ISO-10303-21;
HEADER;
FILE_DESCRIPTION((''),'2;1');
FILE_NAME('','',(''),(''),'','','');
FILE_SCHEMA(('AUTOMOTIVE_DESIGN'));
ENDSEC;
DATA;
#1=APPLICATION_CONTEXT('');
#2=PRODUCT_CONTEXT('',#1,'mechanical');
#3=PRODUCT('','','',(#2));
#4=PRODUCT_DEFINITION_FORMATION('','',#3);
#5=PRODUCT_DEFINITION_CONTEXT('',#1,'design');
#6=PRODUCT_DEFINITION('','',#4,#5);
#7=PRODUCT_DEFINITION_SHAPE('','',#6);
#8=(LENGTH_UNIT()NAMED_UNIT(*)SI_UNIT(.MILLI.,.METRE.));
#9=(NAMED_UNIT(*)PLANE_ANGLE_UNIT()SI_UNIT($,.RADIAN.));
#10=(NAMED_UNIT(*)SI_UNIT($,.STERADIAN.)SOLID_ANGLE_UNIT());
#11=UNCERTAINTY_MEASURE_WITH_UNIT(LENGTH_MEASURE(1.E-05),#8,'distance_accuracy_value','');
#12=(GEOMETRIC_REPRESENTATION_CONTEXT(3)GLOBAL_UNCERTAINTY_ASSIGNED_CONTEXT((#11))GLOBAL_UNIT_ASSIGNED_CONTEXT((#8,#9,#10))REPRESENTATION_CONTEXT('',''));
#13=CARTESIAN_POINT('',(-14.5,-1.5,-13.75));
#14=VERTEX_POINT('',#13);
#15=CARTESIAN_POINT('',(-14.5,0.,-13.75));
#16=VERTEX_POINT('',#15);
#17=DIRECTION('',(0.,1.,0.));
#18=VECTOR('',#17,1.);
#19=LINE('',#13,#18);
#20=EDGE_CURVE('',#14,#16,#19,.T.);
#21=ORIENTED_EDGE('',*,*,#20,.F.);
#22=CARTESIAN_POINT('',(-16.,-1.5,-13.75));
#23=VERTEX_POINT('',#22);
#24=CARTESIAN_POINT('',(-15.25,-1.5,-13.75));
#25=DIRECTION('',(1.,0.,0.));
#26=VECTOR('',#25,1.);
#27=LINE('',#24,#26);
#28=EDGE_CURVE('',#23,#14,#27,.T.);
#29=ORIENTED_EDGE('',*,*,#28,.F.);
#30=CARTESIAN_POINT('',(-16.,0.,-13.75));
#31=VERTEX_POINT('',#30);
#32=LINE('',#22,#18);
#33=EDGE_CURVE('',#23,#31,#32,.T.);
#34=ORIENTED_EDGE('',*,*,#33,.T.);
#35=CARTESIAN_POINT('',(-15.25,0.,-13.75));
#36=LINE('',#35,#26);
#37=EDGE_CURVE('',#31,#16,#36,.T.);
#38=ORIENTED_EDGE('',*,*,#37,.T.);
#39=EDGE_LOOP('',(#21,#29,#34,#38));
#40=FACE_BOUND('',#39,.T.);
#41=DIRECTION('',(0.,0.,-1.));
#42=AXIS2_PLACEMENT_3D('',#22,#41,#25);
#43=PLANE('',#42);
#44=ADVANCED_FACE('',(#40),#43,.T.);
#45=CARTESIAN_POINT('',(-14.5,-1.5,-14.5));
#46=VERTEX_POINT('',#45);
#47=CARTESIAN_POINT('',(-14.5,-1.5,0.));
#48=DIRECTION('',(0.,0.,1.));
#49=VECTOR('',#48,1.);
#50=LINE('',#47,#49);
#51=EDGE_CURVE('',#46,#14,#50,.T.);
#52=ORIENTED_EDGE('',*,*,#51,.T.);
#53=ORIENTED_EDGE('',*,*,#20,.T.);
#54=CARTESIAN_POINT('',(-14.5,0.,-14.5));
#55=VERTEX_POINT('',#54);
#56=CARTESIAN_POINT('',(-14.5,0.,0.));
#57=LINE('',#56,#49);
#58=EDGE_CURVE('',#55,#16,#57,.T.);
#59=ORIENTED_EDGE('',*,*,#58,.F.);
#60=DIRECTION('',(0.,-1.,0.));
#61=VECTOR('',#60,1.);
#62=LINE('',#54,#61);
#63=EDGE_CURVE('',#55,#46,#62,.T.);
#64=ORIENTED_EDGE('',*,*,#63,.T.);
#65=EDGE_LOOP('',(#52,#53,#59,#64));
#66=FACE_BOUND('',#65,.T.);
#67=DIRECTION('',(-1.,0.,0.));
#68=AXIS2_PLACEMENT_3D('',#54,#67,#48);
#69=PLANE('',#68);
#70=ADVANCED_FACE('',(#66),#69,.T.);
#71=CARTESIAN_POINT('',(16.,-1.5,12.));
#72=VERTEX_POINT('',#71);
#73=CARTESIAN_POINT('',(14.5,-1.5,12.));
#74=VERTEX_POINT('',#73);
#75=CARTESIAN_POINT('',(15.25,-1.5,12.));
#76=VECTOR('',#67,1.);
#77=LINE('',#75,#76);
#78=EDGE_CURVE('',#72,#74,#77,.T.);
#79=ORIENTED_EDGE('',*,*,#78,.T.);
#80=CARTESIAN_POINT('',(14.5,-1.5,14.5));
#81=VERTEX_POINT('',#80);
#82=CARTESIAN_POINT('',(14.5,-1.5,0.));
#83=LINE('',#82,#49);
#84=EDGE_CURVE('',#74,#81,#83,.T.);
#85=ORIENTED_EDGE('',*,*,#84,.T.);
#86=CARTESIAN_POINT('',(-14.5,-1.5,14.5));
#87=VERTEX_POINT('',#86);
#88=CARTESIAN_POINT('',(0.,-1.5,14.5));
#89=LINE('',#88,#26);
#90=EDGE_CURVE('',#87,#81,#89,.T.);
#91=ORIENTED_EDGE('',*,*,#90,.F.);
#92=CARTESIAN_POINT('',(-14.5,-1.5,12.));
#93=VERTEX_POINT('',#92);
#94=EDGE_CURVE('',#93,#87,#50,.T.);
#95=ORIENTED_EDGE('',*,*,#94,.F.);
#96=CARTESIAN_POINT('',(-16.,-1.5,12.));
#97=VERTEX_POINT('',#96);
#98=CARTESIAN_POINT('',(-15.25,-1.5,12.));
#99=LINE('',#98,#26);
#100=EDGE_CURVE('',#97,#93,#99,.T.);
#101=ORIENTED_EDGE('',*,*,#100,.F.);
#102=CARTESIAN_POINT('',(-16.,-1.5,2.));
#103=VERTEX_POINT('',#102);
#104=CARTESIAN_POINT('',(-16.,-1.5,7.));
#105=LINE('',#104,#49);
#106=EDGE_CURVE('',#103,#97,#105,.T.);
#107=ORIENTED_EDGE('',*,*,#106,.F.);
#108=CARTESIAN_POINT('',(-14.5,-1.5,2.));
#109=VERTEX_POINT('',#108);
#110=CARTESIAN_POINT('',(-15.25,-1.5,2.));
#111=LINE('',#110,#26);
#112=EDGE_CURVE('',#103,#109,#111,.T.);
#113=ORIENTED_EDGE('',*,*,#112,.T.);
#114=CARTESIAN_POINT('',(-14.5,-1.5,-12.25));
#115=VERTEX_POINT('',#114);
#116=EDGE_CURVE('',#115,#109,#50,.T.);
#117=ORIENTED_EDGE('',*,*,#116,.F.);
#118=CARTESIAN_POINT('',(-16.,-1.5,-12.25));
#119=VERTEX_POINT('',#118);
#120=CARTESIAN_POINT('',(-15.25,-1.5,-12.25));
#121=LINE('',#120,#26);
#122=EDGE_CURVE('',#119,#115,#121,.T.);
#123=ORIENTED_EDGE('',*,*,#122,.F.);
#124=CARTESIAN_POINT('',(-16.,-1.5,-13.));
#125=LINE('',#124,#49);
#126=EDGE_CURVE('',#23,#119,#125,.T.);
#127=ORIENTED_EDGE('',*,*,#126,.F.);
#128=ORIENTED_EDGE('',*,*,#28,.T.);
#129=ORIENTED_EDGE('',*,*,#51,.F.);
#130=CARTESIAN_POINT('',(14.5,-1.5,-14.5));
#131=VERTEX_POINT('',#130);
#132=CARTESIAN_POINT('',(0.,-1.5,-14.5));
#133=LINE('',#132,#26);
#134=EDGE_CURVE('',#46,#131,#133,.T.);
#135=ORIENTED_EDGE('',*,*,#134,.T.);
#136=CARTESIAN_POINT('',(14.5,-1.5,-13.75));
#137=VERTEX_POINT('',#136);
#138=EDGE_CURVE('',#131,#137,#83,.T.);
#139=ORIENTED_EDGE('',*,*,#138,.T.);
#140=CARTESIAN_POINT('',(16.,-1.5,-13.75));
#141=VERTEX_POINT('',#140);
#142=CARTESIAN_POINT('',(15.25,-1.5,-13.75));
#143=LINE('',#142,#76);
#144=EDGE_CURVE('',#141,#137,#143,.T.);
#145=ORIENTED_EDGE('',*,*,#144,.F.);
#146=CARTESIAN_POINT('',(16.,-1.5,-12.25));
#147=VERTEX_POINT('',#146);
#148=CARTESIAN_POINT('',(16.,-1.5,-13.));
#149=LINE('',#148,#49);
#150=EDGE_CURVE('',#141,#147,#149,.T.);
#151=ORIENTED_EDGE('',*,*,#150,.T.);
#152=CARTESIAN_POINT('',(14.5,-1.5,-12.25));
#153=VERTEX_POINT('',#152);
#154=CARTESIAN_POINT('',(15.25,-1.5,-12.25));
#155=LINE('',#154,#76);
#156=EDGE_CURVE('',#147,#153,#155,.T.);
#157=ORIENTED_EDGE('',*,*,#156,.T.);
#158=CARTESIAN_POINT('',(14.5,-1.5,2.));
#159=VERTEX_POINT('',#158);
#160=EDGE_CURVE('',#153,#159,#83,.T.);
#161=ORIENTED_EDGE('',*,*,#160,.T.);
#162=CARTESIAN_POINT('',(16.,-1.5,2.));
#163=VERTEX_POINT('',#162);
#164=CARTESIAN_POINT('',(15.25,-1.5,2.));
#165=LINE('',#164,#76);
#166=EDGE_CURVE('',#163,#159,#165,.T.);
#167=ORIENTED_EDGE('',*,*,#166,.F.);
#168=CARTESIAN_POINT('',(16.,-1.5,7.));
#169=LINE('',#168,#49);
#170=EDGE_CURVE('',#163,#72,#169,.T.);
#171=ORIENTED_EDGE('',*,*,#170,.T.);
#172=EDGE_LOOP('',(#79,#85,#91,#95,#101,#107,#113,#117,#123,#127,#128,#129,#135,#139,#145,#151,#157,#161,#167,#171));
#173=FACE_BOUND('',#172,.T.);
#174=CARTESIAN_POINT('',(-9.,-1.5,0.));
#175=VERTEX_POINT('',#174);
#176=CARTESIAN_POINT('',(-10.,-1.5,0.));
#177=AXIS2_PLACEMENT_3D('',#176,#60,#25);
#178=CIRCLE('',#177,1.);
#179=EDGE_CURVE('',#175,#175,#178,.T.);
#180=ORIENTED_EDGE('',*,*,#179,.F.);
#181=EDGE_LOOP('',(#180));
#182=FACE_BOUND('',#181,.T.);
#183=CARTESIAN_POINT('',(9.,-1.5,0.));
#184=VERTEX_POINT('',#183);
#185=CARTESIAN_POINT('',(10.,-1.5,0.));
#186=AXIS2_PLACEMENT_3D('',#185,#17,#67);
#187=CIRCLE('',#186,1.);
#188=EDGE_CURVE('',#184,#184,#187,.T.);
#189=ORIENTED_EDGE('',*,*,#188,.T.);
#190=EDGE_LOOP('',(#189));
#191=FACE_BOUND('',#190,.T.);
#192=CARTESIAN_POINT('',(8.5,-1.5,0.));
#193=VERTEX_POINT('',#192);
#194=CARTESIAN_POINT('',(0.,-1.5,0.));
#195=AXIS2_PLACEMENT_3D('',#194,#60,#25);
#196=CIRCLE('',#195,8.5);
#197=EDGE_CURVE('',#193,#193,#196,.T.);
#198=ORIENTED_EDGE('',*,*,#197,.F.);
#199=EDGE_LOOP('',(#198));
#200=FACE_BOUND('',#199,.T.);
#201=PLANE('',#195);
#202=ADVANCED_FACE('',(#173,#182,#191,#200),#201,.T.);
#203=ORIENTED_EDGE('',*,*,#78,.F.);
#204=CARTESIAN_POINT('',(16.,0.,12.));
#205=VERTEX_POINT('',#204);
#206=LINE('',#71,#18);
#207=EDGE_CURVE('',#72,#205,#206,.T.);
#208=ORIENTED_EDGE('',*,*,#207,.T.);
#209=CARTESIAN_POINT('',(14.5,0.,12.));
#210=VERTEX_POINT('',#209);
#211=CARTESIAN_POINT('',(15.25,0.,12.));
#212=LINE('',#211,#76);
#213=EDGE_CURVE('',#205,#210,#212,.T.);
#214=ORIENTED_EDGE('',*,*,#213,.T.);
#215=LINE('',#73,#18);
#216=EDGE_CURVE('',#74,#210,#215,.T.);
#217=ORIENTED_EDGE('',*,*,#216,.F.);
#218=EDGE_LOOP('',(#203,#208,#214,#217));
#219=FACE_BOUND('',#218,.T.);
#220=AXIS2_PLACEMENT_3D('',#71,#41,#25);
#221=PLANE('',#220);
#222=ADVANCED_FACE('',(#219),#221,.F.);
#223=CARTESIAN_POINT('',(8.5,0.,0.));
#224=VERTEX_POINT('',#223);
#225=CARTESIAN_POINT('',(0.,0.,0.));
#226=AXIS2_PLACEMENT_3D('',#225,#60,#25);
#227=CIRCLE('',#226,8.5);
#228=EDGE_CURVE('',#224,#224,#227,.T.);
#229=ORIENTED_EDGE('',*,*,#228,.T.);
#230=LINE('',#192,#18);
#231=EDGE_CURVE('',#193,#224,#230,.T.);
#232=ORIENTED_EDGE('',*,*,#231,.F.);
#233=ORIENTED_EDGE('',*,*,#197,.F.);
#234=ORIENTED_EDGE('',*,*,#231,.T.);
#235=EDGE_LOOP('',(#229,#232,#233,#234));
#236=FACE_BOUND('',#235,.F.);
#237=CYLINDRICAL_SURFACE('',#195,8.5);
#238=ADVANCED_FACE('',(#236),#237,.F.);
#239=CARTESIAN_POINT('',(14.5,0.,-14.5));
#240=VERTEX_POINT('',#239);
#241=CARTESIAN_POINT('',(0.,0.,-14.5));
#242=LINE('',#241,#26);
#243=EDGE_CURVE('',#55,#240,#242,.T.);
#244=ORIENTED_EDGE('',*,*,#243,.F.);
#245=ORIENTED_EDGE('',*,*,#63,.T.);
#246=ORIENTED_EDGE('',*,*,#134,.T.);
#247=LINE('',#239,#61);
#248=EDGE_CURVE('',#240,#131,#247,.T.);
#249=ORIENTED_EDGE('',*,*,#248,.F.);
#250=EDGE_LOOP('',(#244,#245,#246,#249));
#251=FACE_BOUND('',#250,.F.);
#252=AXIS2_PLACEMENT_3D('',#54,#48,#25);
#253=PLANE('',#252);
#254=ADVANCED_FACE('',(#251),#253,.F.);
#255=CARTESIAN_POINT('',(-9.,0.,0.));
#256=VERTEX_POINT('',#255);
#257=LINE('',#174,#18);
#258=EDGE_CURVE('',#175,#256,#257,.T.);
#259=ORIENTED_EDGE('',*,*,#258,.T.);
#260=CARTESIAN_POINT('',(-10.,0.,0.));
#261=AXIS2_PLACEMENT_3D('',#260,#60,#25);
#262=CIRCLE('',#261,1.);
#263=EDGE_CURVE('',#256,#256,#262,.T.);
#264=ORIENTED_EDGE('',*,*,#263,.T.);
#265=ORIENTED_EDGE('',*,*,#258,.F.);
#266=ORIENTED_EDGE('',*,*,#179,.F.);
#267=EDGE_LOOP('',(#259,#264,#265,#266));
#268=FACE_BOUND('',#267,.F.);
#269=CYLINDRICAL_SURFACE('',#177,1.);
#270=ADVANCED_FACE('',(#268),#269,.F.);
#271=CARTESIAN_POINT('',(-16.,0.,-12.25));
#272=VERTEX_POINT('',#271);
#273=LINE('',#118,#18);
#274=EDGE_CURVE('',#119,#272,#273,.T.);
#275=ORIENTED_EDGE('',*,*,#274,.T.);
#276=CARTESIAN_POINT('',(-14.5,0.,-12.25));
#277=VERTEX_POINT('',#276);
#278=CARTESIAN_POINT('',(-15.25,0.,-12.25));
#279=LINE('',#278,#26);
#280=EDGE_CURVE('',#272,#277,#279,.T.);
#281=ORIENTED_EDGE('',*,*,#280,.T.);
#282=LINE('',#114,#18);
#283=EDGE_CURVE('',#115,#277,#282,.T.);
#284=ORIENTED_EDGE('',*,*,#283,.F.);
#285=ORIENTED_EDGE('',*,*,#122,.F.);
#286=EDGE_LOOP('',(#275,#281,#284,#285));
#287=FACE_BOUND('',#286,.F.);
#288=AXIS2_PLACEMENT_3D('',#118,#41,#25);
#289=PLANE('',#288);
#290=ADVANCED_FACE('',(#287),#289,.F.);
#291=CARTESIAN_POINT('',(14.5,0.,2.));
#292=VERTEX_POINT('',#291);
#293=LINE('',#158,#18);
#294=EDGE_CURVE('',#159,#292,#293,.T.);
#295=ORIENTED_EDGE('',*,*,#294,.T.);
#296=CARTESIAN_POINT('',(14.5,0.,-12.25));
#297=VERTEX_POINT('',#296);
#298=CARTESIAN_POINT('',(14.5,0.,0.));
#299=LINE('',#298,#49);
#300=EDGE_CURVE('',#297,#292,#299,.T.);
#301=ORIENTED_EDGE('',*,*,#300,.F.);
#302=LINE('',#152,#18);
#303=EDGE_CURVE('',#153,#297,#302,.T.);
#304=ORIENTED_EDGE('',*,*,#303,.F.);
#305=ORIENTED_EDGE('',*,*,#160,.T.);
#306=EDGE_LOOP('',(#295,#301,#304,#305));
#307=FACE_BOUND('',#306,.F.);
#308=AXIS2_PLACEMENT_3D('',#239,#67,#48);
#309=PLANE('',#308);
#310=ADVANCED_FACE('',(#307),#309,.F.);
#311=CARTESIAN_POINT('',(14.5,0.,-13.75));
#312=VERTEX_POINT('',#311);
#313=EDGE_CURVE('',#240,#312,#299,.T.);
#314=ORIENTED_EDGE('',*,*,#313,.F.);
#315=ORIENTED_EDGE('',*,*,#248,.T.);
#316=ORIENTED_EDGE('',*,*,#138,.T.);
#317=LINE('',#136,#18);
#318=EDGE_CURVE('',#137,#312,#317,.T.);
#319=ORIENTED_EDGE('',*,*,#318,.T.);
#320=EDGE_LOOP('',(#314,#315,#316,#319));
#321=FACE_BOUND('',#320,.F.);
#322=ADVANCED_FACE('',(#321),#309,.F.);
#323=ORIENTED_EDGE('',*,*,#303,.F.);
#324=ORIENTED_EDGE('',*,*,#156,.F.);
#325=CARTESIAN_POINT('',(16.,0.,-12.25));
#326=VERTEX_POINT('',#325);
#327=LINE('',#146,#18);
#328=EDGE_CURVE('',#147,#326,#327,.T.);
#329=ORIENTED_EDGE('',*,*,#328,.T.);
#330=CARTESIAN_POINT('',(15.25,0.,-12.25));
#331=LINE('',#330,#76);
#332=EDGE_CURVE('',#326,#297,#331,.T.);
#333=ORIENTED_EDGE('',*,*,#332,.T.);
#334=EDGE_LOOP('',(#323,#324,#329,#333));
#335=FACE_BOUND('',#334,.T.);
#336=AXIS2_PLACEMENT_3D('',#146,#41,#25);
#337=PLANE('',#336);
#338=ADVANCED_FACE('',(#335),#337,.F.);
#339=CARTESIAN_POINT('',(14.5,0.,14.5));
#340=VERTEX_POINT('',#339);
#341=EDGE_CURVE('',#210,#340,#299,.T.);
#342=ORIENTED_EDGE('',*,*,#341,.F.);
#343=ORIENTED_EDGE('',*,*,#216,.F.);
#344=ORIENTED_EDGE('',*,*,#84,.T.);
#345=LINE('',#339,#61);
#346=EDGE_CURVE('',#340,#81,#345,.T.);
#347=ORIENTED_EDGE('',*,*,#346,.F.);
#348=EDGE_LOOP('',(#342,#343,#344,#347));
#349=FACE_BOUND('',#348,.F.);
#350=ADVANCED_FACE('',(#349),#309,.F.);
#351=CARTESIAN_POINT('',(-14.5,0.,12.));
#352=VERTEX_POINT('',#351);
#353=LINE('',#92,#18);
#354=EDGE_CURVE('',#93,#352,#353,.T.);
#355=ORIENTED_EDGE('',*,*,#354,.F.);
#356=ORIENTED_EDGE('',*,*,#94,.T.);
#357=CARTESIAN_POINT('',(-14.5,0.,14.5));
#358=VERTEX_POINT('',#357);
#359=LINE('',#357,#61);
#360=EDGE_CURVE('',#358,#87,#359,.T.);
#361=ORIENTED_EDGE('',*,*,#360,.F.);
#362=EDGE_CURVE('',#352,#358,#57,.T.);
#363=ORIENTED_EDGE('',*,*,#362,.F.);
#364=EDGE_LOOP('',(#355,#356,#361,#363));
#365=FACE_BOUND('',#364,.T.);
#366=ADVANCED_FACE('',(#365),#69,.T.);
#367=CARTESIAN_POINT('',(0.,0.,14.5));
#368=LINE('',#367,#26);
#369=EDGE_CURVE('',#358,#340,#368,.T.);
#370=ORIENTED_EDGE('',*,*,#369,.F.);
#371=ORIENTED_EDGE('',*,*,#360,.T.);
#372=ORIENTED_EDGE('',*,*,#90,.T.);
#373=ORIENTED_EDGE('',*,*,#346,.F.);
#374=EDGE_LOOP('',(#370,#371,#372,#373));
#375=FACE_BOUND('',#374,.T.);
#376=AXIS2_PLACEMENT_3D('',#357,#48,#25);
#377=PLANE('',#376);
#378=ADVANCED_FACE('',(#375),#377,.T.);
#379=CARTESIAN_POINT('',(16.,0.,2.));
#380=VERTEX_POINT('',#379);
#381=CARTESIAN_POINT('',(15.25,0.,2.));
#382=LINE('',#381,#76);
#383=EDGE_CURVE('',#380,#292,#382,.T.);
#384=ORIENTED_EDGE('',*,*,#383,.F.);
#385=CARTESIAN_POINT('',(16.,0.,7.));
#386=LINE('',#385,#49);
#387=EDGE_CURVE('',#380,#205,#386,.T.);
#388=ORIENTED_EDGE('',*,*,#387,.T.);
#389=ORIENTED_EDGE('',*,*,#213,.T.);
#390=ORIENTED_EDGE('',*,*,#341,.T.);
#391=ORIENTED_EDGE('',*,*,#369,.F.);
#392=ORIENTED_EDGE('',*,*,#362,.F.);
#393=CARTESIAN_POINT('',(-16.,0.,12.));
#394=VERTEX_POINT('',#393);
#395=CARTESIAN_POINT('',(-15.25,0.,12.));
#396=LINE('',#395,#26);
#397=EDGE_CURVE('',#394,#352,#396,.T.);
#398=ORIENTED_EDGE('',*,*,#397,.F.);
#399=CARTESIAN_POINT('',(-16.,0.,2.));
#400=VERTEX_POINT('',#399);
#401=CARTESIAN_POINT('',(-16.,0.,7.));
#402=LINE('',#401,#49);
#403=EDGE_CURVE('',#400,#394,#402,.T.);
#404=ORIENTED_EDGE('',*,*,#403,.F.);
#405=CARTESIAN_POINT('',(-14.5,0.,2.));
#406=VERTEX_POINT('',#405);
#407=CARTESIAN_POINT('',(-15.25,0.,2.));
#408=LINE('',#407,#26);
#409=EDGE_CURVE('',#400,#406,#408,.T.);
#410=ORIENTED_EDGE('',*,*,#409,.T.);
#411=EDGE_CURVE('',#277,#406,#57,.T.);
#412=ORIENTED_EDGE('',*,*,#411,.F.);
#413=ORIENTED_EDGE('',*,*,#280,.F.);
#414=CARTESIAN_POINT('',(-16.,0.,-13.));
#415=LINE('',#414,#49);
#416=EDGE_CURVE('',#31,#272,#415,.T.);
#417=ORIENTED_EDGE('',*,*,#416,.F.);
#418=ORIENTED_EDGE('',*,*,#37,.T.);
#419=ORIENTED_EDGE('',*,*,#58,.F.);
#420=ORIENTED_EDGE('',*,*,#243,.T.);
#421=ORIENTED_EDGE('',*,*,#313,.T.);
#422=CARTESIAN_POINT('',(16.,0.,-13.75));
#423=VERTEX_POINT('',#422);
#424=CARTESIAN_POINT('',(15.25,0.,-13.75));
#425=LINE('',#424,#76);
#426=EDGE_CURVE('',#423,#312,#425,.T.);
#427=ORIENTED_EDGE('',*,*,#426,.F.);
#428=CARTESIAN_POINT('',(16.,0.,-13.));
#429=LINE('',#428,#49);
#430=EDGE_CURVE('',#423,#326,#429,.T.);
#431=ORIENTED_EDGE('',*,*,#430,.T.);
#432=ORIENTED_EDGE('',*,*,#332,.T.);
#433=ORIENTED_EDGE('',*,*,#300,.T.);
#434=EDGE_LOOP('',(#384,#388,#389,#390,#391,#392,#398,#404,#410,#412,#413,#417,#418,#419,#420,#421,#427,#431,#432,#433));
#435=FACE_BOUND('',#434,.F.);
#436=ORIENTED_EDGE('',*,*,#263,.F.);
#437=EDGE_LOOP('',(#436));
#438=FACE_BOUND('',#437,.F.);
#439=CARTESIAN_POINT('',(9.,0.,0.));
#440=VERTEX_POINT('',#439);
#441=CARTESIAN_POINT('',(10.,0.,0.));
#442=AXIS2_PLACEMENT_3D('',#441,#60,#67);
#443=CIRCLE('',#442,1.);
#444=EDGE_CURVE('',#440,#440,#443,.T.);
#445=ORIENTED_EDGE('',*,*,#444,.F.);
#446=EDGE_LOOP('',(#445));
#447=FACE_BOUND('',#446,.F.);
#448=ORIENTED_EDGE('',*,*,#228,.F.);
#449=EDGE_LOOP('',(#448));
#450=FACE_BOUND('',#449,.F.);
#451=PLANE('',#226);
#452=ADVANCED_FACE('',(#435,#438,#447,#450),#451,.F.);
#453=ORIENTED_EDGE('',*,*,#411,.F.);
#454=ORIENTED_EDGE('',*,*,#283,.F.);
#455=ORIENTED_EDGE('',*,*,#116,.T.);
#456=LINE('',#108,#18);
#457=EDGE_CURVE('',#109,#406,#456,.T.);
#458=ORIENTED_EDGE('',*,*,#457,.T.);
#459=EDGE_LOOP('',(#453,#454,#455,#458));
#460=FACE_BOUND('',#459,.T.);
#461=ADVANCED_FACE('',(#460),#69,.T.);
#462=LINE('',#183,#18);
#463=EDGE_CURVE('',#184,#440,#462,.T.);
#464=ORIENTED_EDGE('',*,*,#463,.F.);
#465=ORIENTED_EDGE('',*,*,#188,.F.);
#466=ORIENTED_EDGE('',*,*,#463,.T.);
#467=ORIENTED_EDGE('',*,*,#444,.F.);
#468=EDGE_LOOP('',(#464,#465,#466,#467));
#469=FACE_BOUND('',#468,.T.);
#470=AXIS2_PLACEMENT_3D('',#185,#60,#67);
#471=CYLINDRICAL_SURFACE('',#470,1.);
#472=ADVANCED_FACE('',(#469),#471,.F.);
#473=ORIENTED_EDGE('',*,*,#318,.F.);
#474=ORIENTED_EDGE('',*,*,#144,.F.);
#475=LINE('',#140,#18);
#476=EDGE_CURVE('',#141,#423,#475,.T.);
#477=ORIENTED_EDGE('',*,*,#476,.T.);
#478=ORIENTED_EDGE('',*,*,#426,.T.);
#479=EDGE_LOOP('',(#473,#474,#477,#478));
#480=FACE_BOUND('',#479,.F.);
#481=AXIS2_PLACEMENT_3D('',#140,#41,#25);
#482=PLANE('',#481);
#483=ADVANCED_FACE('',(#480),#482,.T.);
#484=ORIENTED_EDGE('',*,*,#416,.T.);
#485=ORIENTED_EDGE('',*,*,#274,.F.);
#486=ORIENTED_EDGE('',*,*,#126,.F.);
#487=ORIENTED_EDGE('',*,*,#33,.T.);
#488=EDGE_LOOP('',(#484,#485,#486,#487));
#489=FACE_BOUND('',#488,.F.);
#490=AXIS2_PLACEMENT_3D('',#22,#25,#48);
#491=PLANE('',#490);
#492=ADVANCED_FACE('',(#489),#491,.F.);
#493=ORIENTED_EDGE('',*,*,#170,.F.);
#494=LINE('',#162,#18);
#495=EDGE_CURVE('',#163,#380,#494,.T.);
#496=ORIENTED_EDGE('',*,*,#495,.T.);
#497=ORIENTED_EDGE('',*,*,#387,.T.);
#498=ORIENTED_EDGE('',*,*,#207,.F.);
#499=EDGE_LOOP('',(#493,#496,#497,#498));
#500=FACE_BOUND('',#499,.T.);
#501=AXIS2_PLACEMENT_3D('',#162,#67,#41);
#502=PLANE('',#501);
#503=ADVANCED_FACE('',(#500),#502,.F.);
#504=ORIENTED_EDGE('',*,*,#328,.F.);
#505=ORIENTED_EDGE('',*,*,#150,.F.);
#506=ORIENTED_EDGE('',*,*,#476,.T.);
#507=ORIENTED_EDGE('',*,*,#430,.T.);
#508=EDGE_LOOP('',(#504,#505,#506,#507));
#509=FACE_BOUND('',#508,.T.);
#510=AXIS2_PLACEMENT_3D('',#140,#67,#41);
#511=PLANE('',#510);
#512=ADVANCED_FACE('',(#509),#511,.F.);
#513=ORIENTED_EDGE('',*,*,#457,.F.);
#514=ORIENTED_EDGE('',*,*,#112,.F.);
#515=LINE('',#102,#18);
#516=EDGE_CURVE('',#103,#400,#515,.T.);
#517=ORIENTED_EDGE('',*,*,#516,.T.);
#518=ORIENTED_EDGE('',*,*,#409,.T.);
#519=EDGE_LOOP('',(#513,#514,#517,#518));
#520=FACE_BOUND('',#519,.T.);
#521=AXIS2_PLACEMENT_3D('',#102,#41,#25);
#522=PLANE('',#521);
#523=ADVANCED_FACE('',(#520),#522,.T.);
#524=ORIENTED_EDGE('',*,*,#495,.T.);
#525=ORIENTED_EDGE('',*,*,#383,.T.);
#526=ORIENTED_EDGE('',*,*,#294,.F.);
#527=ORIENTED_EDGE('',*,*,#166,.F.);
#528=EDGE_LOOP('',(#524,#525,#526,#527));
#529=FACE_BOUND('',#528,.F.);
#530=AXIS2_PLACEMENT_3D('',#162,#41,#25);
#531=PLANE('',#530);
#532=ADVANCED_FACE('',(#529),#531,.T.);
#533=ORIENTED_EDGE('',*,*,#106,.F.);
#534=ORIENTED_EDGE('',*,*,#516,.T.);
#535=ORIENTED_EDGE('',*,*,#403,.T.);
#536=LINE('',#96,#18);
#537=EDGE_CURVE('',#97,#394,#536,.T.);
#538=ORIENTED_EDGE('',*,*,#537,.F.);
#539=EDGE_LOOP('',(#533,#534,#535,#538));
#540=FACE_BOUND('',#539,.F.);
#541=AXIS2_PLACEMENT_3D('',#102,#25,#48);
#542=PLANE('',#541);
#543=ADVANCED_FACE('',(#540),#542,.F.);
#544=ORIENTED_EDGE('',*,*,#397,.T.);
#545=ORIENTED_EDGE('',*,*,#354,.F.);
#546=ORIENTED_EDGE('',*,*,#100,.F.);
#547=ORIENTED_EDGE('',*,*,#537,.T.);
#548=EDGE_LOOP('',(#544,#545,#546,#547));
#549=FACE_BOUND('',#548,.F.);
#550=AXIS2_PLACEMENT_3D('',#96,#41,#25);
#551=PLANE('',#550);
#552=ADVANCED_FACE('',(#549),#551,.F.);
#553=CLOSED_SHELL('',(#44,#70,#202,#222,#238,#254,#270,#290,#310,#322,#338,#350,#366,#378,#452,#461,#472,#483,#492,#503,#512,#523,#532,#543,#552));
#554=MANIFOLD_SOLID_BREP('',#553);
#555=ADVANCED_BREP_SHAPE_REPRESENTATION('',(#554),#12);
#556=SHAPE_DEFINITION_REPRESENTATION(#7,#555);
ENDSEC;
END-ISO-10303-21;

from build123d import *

# Parameters (mm, degrees)
F0_W     = 29
F0_H     = 29
F1_DEPTH = 1.5
F2_R     = 8.5
F3_DEPTH = 1.501
F4_R     = 1
F5_DEPTH = 1.501
F6_W     = 1.5
F6_H     = 1.5
F6_H_2   = 10
F7_DEPTH = 1.5


# Not quite as in the source:
# - a pattern or mirror of a feature is missing from the dataset's text; its kind, count and spacing are read off the source's solid


with BuildPart() as f1:
    # F0 (on Front) → F1 (new body)
    with BuildSketch(Plane.XZ):
        Rectangle(F0_W, F0_H)
    extrude(amount=F1_DEPTH)

    # F2 (on face) → F3 (cut, through all)
    with BuildSketch(Plane.XZ.offset(1.5)):
        Circle(F2_R)
    extrude(amount=-F3_DEPTH, mode=Mode.SUBTRACT)

    # F4 (on face) → F5 (cut, through all)
    with BuildSketch(Plane.XZ.offset(1.5)):
        with Locations((-10, 0)):
            Circle(F4_R)
    f5 = extrude(amount=-F5_DEPTH, mode=Mode.SUBTRACT)

    # F5_copies: F5 across plane
    add(f5.mirror(Plane(origin=(0, 0, 0), x_dir=(0, 0, 1), z_dir=(1, 0, 0))), mode=Mode.SUBTRACT)

    # F6 (on face) → F7 (join)
    with BuildSketch(Plane.XZ.offset(1.5)):
        with Locations((-15.25, -13)):
            Rectangle(F6_W, F6_H)
        with Locations((-15.25, 7)):
            Rectangle(F6_W, F6_H_2)
    f7 = extrude(amount=-F7_DEPTH)

    # F7_copies: F7 across plane
    add(f7.mirror(Plane(origin=(0, 0, 0), x_dir=(0, 0, 1), z_dir=(1, 0, 0))))


solid = f1.part
